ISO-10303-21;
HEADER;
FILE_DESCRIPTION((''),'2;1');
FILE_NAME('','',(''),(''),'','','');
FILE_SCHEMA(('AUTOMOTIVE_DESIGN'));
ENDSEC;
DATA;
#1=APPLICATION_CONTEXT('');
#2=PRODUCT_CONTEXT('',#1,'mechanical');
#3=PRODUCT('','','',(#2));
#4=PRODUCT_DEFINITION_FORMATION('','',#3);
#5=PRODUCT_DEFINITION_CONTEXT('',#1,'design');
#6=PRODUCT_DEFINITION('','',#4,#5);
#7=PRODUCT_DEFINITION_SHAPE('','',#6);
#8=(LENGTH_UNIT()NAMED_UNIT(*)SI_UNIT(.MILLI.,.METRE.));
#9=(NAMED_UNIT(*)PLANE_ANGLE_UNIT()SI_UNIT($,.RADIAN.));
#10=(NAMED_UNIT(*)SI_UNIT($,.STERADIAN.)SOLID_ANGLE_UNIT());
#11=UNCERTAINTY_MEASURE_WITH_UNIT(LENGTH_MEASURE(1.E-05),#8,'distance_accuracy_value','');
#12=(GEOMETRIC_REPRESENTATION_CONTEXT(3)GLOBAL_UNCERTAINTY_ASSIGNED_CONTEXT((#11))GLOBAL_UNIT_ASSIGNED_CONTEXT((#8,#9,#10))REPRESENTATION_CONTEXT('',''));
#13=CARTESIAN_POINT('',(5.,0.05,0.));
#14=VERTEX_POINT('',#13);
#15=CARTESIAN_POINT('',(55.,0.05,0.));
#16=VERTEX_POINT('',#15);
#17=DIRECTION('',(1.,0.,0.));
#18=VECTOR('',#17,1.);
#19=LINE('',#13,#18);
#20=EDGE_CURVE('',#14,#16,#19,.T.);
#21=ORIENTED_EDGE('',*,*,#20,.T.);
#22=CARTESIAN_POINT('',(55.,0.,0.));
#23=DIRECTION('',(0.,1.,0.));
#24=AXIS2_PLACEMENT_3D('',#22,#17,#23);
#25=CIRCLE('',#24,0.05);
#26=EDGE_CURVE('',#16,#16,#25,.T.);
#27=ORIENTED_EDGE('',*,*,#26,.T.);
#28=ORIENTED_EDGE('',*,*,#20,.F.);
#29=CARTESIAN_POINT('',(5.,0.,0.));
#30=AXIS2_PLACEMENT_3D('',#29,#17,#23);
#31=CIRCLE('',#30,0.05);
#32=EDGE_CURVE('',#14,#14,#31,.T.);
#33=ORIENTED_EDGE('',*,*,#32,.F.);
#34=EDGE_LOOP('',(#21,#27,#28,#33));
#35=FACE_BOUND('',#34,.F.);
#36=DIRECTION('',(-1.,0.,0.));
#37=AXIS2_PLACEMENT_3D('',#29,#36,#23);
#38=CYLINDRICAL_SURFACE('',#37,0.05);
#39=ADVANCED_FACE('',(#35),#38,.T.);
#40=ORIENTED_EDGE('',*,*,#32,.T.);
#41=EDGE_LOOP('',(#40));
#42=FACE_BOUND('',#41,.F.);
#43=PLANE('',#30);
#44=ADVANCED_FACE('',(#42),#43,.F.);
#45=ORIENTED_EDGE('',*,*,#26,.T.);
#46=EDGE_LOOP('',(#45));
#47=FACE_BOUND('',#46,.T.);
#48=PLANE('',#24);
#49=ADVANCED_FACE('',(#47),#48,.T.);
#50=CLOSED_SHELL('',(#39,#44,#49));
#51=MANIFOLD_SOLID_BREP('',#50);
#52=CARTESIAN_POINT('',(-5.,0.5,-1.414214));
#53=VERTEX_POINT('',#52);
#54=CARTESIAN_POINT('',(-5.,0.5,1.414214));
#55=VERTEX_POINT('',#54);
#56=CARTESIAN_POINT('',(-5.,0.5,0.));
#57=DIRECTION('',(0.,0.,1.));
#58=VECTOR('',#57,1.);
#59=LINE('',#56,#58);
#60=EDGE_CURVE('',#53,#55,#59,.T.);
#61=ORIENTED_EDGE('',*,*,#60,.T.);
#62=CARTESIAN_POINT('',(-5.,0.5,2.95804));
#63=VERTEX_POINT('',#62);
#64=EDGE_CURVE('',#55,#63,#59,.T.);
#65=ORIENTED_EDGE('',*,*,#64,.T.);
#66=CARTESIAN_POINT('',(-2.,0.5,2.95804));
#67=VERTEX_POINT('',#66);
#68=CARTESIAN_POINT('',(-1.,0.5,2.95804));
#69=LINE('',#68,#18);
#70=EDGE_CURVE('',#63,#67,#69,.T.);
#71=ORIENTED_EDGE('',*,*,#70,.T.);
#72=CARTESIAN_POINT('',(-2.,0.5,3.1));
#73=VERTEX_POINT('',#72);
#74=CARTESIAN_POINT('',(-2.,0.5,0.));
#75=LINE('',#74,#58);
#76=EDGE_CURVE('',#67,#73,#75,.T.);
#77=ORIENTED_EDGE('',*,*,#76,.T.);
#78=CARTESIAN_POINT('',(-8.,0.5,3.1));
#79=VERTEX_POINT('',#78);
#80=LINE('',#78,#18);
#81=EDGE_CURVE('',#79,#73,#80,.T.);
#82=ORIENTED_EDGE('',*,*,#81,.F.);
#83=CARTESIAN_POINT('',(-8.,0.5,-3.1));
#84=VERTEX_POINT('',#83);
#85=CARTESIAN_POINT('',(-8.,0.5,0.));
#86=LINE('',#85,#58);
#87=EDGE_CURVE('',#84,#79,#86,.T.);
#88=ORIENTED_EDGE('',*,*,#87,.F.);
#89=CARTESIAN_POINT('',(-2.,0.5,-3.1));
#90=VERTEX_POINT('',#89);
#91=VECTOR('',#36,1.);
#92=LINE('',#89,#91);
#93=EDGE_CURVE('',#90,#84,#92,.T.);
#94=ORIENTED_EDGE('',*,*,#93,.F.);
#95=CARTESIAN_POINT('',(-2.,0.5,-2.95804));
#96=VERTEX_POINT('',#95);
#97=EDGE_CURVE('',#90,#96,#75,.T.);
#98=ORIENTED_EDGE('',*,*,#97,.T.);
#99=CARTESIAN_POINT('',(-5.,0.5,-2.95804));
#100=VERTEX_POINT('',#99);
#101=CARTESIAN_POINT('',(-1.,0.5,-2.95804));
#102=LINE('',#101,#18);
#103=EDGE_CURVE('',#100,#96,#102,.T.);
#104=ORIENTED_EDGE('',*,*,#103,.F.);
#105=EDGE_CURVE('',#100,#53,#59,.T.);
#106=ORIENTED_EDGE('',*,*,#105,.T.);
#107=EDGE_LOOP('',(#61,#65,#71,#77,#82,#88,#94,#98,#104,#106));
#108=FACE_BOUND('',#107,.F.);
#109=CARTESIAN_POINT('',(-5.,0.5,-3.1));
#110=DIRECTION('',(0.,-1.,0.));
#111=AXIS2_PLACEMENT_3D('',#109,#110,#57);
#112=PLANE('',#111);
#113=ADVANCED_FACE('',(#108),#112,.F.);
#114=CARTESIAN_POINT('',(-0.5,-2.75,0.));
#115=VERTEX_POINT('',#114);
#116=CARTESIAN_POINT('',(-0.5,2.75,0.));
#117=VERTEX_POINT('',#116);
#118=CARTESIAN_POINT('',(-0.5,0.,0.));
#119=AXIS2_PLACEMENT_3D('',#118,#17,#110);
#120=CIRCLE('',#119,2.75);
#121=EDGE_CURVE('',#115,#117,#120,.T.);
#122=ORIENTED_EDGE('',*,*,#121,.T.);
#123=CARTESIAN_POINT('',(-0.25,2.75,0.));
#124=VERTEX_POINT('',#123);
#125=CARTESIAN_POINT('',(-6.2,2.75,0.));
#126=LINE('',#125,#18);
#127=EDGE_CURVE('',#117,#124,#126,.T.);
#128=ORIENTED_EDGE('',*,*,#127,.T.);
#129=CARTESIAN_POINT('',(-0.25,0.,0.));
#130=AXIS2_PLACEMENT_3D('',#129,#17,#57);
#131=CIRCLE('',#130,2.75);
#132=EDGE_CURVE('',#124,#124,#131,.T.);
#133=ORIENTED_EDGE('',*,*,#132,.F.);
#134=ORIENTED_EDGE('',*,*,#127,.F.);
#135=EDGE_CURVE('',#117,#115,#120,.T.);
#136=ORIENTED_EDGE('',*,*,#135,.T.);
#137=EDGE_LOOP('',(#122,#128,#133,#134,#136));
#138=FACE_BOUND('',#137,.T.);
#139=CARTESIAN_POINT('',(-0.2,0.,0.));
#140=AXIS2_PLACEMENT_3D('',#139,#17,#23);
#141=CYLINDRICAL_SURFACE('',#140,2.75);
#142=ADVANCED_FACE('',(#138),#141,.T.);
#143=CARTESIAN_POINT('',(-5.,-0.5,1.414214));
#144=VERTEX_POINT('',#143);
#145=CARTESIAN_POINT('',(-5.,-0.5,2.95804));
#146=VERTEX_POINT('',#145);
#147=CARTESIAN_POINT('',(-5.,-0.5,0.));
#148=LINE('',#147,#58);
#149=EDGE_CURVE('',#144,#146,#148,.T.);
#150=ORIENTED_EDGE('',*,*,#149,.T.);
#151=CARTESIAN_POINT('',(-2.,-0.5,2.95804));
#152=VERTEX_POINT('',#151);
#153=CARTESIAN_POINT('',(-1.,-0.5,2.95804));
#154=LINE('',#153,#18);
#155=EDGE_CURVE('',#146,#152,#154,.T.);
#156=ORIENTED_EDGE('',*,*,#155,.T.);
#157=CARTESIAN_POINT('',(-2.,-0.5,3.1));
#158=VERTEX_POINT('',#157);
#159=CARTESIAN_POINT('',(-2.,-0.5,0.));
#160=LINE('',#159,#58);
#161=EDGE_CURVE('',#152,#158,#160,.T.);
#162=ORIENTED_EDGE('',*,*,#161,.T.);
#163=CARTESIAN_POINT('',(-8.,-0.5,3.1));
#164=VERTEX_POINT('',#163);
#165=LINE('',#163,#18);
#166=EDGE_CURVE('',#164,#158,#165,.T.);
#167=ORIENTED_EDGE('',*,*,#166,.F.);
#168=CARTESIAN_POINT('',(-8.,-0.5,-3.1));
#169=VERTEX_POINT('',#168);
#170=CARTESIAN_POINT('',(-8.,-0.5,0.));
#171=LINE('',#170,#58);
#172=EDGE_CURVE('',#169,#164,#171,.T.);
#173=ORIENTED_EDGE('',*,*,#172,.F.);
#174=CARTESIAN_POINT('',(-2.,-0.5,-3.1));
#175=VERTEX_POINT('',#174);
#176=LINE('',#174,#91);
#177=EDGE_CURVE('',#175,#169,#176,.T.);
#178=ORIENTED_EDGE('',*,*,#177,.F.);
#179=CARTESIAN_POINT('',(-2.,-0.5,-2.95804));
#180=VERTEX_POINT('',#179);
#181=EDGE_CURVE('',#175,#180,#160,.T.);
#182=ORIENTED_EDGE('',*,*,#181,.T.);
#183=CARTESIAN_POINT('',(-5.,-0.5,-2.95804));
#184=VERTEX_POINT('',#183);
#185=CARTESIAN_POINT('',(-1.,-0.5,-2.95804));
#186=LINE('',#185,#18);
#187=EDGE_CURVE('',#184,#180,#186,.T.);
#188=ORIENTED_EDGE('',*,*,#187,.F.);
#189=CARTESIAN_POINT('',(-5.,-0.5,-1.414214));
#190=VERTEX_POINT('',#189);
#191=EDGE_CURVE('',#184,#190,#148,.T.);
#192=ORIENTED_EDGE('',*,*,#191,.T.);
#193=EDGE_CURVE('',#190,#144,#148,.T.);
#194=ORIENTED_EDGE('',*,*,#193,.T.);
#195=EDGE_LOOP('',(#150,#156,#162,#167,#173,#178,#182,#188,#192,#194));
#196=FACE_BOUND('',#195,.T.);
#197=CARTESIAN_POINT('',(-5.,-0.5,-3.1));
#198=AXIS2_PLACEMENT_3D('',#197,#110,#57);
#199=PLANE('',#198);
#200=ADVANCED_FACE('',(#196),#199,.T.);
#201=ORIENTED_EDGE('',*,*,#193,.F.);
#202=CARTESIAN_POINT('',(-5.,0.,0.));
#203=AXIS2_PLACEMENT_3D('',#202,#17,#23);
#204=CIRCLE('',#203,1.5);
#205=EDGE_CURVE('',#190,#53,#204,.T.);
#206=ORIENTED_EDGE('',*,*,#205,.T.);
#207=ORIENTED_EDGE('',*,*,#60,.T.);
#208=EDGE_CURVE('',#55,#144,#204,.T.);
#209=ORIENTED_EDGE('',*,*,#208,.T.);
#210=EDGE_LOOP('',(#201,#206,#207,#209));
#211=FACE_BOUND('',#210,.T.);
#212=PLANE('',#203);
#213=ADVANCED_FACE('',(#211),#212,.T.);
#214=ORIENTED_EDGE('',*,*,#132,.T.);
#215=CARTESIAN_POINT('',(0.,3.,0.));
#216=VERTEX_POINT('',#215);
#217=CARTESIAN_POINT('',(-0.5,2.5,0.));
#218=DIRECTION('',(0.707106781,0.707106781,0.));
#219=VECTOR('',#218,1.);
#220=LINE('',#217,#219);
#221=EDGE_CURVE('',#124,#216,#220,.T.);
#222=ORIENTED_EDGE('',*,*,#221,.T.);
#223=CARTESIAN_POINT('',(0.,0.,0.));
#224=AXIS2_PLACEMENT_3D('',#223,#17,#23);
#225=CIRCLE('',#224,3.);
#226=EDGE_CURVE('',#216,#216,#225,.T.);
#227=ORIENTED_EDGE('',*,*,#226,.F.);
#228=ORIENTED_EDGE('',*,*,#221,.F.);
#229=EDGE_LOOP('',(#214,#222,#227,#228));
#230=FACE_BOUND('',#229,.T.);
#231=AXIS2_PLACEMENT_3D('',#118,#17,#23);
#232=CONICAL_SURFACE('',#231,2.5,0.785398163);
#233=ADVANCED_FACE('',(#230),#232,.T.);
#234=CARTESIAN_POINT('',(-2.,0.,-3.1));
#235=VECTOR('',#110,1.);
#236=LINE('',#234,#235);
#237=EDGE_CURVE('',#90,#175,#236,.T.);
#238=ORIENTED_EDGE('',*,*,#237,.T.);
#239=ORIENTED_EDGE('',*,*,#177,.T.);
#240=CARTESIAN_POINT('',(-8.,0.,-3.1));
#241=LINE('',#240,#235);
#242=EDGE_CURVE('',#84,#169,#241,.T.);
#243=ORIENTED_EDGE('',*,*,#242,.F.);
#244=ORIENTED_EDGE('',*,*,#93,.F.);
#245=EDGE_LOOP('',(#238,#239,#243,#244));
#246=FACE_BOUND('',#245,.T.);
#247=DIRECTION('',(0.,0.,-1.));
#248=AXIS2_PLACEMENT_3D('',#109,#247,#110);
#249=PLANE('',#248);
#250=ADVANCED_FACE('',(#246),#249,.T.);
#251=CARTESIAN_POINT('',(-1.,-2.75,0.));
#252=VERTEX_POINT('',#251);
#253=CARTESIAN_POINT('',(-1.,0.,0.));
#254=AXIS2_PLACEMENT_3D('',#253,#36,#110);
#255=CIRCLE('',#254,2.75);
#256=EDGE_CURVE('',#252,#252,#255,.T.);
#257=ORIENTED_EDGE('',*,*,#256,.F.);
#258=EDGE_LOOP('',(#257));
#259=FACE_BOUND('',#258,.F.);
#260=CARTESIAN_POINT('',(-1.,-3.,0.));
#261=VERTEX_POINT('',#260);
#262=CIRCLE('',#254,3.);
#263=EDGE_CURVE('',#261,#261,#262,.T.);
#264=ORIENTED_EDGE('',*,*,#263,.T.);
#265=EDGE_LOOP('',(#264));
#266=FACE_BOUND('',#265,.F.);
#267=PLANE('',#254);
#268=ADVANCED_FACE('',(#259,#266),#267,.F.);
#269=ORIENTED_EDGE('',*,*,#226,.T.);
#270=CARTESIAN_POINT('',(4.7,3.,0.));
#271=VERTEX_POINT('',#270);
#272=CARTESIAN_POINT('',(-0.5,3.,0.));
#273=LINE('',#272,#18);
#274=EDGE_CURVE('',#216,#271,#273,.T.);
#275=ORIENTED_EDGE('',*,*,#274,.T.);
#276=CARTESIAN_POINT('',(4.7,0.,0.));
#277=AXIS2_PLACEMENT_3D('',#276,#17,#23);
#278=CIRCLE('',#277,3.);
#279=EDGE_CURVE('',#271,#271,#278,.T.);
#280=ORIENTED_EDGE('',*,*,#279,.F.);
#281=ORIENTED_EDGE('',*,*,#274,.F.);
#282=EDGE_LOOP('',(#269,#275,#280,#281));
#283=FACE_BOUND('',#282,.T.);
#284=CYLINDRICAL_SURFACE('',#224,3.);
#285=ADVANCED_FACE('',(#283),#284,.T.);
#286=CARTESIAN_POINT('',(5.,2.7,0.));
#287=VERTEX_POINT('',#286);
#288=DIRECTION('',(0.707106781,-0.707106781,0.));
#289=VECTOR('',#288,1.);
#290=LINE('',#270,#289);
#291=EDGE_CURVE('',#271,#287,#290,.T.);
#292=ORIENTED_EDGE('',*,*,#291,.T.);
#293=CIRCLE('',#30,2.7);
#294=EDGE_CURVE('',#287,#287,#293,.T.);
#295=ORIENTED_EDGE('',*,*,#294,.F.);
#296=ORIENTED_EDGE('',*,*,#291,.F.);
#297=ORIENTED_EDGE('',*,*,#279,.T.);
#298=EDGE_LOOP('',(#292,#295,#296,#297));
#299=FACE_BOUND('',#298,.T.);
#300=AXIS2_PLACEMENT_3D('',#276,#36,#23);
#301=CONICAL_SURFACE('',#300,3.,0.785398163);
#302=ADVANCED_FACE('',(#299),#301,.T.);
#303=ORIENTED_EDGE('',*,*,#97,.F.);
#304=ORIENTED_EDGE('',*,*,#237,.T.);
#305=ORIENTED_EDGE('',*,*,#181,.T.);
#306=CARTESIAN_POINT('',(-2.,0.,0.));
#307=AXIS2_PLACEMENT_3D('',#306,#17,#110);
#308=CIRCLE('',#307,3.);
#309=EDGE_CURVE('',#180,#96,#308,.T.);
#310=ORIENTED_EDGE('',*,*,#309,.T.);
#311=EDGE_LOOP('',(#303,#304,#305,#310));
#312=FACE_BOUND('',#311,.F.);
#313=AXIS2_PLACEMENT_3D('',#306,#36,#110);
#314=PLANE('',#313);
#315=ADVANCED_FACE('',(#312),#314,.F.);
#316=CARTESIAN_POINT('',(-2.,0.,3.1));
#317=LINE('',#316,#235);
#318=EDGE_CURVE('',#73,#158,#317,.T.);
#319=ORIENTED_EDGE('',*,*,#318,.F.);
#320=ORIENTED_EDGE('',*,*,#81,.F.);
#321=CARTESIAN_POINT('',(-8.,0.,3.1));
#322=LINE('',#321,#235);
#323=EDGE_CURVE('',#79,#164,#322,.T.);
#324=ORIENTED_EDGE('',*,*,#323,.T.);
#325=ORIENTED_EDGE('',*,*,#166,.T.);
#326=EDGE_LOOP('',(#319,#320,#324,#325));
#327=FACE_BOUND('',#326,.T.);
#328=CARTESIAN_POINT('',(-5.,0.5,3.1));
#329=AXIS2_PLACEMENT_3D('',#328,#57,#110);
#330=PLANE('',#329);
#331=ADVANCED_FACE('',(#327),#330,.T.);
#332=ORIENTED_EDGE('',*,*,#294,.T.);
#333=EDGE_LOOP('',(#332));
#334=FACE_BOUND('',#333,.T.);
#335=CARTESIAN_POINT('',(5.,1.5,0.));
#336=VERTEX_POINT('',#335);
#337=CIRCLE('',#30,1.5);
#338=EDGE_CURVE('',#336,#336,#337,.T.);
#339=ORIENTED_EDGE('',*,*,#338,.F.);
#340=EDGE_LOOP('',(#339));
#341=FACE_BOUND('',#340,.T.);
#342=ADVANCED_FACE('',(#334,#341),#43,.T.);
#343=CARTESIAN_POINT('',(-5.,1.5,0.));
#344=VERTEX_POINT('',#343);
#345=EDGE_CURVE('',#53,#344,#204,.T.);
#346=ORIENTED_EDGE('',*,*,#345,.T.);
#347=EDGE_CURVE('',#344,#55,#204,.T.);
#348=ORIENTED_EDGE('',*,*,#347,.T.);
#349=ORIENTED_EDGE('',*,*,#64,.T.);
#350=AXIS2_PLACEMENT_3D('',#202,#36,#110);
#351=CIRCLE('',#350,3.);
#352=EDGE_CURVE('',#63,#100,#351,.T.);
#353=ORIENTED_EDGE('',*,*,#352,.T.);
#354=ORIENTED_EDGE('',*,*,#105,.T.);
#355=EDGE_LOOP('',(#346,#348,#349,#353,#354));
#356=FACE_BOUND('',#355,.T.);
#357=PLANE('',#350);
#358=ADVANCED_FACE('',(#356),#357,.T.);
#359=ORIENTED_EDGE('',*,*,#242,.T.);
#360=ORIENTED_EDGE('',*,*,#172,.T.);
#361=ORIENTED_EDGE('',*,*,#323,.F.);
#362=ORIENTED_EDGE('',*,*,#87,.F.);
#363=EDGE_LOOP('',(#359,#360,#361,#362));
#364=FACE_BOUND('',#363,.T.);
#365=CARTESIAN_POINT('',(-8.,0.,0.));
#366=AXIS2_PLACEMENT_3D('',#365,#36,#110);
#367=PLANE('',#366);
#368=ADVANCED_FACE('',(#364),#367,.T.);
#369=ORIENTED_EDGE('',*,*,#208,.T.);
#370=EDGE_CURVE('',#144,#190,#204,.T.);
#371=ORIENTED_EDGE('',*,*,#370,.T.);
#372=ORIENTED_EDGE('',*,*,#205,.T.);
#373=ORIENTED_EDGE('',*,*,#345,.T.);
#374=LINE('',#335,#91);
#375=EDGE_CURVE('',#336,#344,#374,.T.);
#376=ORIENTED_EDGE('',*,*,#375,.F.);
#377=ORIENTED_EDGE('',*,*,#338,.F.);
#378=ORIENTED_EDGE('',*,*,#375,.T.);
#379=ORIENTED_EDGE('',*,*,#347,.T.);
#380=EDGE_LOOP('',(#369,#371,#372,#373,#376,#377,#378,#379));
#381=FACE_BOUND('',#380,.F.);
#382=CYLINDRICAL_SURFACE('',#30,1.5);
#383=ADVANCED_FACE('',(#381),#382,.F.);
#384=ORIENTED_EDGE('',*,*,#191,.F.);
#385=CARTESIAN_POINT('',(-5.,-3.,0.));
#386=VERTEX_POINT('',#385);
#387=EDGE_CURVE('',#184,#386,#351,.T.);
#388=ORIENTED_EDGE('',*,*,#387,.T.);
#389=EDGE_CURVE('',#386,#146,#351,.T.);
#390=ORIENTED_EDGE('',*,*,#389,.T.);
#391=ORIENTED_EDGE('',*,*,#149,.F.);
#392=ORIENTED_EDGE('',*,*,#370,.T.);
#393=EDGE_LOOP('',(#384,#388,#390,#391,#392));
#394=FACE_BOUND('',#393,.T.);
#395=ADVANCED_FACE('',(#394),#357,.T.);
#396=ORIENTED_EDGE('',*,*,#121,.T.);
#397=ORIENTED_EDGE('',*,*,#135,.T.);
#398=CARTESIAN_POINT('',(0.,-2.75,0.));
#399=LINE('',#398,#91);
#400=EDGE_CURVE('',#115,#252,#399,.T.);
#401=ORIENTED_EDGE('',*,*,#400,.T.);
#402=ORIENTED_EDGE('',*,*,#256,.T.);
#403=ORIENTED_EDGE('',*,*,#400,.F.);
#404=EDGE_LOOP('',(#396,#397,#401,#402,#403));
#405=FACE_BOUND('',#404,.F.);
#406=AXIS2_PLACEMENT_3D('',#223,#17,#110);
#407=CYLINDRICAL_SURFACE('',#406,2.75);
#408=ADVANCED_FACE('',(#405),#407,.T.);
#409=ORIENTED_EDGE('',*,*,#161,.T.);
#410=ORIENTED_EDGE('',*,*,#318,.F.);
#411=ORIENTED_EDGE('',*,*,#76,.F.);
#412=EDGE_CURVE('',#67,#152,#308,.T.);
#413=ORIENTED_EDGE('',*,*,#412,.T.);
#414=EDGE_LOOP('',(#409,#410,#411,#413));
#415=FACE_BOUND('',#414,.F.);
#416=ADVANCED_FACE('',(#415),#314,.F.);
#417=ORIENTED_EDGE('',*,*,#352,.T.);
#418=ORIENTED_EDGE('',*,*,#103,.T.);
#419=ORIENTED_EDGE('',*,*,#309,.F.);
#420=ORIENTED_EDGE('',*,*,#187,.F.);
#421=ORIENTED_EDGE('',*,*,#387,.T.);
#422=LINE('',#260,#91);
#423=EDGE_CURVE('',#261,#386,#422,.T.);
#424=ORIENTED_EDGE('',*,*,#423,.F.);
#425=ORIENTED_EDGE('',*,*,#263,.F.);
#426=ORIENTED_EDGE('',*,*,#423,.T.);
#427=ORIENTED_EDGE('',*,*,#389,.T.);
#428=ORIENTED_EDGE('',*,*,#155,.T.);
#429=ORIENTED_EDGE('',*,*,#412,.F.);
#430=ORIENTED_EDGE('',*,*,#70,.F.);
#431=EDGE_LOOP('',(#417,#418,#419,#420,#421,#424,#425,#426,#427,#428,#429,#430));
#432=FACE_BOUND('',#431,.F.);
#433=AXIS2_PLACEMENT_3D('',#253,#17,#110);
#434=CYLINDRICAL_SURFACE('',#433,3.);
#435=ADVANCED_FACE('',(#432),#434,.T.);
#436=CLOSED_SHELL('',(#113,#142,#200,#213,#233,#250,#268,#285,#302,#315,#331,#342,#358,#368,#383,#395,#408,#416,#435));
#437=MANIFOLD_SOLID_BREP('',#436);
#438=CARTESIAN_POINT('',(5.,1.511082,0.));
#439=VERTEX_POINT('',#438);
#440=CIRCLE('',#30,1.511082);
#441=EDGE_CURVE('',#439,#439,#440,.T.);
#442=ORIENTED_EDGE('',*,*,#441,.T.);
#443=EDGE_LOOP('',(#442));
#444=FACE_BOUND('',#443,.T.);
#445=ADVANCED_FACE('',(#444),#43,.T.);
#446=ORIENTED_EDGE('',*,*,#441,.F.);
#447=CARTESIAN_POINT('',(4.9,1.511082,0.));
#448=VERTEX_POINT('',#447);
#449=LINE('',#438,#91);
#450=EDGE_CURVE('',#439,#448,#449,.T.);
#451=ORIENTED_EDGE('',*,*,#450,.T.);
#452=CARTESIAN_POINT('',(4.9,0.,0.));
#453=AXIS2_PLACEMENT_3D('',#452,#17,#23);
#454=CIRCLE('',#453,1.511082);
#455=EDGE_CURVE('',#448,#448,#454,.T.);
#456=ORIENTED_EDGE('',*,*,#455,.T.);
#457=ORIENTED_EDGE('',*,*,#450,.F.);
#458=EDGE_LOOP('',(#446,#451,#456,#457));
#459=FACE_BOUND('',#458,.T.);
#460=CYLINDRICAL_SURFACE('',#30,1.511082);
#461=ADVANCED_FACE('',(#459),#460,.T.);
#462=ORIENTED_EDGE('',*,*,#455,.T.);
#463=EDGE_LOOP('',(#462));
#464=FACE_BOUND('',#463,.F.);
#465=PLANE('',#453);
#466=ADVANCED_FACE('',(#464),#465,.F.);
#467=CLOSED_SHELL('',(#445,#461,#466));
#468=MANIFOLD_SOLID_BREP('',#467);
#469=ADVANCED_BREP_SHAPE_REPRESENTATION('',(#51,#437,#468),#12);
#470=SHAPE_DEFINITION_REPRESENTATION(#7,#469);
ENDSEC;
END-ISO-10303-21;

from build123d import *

# Parameters (mm, degrees)
F0_R         = 3
F1_DEPTH     = 5
F2_R         = 2.75
F3_DEPTH     = 1
F4_R         = 3
F5_DEPTH     = 4
F6_W         = 1
F6_H         = 6.2
F7_DEPTH     = 3
F8_DEPTH     = 3
F9_DEPTH     = 0.5
F10_S5_R     = 2.75
F10_T6_DEPTH = 6
F11_SIZE     = 0.3
F12_R        = 1.5
F13_DEPTH    = 10
F14_R        = 0.05
F15_DEPTH    = 50
F16_R        = 1.5110821028
F17_DEPTH    = 0.1


# Not quite as in the source:
# - a fillet or chamfer that OpenCascade refuses, or shapes differently, is made with other operations: its cross-section is extruded or revolved along the edge and cut away or added


with BuildPart() as f1:
    # F0 (on Right) → F1 (new body)
    with BuildSketch(Plane.YZ):
        Circle(F0_R)
    extrude(amount=F1_DEPTH)

    # F2 (on face) → F3 (join)
    with BuildSketch(Plane(origin=(0, 0, 0), x_dir=(0, -1, 0), z_dir=(-1, 0, 0))):
        Circle(F2_R)
    extrude(amount=F3_DEPTH)

    # F4 (on face) → F5 (join)
    with BuildSketch(Plane(origin=(-1, 0, 0), x_dir=(0, -1, 0), z_dir=(-1, 0, 0))):
        Circle(F4_R)
    extrude(amount=F5_DEPTH)

    # F6 (on face) → F7 (join)
    with BuildSketch(Plane(origin=(-5, 0, 0), x_dir=(0, -1, 0), z_dir=(-1, 0, 0))):
        Rectangle(F6_W, F6_H)
    extrude(amount=F7_DEPTH)

    # F6 (on face) → F8 (join)
    with BuildSketch(Plane(origin=(-5, 0, 0), x_dir=(0, -1, 0), z_dir=(-1, 0, 0))):
        Rectangle(F6_W, F6_H)
    extrude(amount=-F8_DEPTH)

    # F0 (on Right) → F9 (join)
    with BuildSketch(Plane.YZ):
        Circle(F0_R)
    extrude(amount=-F9_DEPTH)

    # F10: chamfer of 0.5 on 1 edges, made by hand


with BuildPart() as f10_tool2:
    # F10_s3 → F10_t4 (revolve)
    with BuildSketch(Plane.XY):
        Polygon((-0.5, 2.5), (0, 3), (-0.5, 3), align=None)
    revolve(axis=Axis((-0.5, 0, 0), (1, 0, 0)))

    # F10_s5 → F10_t6 (cut, symmetric)
    with BuildSketch(Plane.YZ.offset(-0.2)):
        Circle(F10_S5_R)
    extrude(amount=F10_T6_DEPTH, both=True, mode=Mode.SUBTRACT)


with BuildPart() as f1_1:
    add(f1.part)

    # F10_t1: cut F10_tool2
    add(f10_tool2.part, mode=Mode.SUBTRACT)

    # F11
    f11_edges = [f1_1.edges().sort_by_distance(p)[0] for p in [
        (5, -3, 0),
    ]]
    chamfer(f11_edges, length=F11_SIZE)

    # F12 (on face) → F13 (cut)
    with BuildSketch(Plane.YZ.offset(5)):
        Circle(F12_R)
    extrude(amount=-F13_DEPTH, mode=Mode.SUBTRACT)


with BuildPart() as f15:
    # F14 (on face) → F15 (new body)
    with BuildSketch(Plane.YZ.offset(5)):
        Circle(F14_R)
    extrude(amount=F15_DEPTH)


with BuildPart() as f17:
    # F16 (on face) → F17 (new body)
    with BuildSketch(Plane.YZ.offset(5)):
        Circle(F16_R)
    extrude(amount=-F17_DEPTH)


solid = Compound([f1_1.part, f15.part, f17.part])
